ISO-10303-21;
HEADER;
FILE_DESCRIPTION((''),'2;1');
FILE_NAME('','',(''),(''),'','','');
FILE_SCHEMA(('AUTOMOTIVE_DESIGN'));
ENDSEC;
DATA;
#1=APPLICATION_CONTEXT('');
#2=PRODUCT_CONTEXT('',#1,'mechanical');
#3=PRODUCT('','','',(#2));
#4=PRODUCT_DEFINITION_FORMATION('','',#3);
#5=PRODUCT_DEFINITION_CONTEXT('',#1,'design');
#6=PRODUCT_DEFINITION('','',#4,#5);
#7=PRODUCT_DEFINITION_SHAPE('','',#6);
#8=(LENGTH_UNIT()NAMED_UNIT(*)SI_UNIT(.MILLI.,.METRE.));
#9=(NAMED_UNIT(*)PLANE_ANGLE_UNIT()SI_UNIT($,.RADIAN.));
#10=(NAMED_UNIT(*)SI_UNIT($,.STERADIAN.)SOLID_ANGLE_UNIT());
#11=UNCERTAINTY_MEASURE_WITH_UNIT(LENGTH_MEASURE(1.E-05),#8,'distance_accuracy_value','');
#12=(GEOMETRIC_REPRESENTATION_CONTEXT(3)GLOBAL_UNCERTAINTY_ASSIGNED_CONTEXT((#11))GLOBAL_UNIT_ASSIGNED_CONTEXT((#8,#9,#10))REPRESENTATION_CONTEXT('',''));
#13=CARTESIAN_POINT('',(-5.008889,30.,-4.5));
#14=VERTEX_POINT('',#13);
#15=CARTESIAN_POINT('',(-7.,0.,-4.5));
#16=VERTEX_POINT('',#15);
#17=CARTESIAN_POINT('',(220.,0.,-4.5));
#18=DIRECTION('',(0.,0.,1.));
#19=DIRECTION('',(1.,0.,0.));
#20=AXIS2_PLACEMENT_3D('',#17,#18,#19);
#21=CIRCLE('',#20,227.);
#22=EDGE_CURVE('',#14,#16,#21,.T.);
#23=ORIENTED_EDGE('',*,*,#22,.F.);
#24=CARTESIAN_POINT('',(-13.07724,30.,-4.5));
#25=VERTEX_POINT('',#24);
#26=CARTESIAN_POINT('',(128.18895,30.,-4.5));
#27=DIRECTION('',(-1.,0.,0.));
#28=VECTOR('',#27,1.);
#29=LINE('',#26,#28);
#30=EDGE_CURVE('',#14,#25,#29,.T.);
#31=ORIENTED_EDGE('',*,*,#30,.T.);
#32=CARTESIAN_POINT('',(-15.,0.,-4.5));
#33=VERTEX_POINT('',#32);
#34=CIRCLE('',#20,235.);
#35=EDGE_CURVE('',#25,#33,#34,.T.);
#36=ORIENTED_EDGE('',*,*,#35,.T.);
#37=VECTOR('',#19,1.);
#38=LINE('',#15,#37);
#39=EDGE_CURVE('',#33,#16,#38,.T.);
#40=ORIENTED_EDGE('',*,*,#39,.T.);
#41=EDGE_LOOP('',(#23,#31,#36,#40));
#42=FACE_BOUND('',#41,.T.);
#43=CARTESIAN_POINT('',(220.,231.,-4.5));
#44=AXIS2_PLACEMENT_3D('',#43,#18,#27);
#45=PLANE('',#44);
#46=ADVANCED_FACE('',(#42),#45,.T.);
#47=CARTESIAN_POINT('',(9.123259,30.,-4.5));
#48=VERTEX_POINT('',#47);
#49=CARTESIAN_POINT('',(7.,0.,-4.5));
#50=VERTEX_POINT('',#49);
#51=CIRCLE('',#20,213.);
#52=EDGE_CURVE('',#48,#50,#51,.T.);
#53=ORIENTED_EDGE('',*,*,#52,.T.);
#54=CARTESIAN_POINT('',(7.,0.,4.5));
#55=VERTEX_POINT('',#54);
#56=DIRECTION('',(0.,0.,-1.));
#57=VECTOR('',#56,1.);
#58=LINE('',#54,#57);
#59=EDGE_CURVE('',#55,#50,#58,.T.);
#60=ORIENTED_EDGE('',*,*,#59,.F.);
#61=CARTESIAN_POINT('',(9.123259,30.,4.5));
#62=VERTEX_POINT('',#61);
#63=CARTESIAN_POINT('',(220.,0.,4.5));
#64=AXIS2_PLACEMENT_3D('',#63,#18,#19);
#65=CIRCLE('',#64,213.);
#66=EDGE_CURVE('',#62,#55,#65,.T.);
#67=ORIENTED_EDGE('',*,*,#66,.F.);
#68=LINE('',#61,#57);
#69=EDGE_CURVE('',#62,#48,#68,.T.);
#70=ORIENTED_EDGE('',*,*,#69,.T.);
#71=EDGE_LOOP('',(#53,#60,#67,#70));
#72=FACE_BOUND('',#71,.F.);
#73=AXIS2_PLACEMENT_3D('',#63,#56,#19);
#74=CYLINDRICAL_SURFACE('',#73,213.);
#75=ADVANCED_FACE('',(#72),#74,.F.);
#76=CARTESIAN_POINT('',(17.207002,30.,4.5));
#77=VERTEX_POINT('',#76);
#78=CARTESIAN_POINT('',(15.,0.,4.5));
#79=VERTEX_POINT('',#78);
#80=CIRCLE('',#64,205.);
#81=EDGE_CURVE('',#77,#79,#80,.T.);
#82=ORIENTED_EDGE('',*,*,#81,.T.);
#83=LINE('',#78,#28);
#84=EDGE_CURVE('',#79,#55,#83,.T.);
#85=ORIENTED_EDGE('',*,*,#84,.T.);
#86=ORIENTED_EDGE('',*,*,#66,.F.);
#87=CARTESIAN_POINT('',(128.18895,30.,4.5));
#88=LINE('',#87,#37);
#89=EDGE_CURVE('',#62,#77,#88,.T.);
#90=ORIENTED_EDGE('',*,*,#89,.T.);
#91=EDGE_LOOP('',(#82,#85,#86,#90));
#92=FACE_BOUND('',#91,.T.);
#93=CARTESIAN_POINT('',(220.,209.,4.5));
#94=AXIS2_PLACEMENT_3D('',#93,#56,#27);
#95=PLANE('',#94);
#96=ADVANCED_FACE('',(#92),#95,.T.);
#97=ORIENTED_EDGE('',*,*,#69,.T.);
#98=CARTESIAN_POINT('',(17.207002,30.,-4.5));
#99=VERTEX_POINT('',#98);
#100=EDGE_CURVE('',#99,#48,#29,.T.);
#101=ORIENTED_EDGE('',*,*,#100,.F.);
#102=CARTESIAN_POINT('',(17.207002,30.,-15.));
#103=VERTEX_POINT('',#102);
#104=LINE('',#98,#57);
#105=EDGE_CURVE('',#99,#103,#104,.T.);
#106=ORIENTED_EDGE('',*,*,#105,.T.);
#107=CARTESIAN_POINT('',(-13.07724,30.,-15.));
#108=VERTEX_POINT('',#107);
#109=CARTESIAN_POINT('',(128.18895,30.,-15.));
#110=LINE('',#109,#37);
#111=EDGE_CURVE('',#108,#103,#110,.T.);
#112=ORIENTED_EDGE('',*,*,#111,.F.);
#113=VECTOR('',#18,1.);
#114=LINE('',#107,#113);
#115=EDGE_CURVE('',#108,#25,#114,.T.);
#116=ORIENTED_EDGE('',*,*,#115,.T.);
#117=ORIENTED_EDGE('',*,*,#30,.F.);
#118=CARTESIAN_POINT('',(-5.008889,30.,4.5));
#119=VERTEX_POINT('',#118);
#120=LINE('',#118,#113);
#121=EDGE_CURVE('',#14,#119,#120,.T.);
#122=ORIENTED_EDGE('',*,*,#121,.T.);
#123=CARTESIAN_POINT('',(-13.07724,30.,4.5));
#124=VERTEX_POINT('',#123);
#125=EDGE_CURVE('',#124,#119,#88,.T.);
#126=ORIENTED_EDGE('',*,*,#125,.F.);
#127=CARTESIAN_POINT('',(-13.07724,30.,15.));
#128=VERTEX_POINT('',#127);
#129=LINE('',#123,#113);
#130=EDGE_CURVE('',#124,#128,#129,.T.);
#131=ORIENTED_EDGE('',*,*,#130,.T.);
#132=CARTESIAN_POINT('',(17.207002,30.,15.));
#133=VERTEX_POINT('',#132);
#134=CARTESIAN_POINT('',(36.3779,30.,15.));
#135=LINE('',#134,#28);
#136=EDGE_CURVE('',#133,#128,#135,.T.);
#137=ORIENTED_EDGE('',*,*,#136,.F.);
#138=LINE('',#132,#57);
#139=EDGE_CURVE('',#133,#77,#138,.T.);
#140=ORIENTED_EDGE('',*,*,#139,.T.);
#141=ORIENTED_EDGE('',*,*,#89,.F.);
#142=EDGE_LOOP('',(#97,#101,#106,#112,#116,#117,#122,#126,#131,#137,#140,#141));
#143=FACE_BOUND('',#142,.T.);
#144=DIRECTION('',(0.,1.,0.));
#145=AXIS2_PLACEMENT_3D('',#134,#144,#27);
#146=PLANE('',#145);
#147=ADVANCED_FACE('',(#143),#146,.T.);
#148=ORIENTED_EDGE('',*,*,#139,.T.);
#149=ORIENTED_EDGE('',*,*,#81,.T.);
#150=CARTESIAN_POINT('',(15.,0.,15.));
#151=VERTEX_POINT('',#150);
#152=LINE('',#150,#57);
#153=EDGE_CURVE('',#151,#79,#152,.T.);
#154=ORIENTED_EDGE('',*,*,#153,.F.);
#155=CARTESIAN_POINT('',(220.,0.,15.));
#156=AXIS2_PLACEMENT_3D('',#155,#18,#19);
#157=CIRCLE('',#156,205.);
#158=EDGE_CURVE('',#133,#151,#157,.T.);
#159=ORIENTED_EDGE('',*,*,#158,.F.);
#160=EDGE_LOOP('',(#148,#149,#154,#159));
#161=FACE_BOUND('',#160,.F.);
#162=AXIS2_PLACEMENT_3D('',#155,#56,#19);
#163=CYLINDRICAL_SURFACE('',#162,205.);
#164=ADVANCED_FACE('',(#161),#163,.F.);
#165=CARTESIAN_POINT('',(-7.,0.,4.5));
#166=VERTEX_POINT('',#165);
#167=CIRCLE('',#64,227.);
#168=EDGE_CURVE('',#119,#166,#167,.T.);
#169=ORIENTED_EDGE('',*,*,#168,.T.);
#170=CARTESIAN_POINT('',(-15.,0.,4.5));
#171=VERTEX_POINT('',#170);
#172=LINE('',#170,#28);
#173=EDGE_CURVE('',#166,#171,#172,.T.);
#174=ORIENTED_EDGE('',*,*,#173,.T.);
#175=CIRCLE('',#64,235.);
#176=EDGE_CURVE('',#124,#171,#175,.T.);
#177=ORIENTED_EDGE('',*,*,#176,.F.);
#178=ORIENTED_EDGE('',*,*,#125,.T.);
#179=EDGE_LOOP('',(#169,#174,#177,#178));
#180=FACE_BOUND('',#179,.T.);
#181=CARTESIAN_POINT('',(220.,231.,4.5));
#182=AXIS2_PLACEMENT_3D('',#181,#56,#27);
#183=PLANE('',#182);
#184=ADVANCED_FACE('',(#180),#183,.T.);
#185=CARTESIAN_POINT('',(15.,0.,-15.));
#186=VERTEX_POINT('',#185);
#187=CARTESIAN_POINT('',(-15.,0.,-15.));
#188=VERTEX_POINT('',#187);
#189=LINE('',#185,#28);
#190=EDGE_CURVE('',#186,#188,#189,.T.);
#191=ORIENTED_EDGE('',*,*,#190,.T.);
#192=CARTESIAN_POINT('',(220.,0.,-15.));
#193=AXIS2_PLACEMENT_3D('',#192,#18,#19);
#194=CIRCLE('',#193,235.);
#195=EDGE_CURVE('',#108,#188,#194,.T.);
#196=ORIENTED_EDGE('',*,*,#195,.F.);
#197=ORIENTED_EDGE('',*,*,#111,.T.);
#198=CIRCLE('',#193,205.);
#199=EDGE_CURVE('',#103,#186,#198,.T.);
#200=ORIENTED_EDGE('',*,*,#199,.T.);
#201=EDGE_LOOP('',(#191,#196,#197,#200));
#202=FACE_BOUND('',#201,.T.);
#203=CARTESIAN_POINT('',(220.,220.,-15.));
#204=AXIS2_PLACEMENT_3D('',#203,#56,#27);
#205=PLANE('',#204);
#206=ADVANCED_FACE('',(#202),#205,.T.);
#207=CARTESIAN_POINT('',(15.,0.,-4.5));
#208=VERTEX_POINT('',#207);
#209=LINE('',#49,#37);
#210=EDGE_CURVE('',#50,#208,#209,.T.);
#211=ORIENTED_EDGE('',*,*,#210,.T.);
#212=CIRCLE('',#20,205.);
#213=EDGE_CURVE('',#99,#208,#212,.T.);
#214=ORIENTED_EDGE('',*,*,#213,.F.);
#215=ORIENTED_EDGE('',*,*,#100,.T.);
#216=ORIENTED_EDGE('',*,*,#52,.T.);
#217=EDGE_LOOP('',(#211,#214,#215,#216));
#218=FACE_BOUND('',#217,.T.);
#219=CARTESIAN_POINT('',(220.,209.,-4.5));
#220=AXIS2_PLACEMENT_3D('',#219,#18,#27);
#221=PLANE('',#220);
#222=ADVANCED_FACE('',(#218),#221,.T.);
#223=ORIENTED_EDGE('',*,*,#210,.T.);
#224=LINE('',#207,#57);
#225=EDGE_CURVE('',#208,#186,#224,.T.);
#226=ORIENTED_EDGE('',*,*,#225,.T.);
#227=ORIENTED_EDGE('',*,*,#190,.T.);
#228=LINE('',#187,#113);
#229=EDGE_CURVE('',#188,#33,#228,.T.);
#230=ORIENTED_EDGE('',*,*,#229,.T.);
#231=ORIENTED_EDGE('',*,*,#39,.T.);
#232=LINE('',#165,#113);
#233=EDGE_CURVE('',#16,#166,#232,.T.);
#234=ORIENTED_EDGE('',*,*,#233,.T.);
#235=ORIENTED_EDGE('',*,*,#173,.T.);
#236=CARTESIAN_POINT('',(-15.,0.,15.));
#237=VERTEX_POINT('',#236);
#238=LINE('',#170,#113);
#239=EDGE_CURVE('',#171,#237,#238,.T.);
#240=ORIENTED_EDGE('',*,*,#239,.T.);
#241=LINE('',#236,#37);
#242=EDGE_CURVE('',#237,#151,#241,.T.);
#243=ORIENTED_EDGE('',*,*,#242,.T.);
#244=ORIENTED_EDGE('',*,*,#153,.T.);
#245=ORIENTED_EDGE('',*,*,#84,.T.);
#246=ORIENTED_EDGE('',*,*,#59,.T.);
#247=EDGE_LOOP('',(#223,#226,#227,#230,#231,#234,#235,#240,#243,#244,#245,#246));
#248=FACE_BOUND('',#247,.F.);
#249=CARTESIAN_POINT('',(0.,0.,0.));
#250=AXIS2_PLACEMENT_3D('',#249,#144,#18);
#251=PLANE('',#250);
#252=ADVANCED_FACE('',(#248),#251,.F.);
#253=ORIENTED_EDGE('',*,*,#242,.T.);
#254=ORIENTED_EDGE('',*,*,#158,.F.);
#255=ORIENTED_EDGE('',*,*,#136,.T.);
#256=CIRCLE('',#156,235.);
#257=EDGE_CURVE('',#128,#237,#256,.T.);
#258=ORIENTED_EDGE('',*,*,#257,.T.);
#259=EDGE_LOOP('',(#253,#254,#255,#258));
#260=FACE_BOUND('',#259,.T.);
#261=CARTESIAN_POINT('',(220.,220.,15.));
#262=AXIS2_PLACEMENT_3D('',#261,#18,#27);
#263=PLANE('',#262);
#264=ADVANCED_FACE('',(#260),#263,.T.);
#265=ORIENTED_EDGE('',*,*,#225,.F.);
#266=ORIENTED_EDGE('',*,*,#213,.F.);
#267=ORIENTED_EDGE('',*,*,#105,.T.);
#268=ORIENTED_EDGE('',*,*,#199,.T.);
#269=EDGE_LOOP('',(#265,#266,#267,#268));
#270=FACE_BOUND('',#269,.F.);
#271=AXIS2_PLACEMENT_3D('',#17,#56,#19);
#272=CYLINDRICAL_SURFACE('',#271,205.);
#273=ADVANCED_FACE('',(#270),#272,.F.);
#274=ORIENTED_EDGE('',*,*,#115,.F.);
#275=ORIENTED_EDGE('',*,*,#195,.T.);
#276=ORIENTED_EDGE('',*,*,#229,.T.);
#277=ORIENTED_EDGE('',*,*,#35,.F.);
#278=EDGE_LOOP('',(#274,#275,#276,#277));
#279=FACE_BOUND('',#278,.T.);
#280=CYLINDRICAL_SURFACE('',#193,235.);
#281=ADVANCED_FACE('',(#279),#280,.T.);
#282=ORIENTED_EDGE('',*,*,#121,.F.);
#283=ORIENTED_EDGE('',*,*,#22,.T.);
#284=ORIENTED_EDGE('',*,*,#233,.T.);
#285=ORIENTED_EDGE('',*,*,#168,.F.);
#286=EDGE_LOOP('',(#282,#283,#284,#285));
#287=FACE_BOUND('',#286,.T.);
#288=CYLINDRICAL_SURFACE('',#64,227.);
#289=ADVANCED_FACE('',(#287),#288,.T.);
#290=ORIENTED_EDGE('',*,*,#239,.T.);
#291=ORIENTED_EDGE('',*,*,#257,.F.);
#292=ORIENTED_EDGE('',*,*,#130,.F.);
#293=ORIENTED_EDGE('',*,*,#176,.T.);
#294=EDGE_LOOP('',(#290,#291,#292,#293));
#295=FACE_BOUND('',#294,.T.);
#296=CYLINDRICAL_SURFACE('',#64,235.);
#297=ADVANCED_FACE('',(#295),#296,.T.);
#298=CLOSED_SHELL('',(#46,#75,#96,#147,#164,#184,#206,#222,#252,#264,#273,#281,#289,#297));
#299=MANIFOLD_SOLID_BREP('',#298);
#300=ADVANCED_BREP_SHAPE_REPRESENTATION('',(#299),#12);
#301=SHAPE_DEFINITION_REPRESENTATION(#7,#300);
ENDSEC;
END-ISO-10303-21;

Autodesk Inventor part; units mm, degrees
ref_plane "YZ Plane" through (0, 0, 0) normal (1, 0, 0) x (0, 1, 0)
ref_plane "XY Plane" through (0, 0, 0) normal (0, 0, 1) x (1, 0, 0)
sketch "Sketch1" plane through (0, 0, 0) normal (0, 0, 1) x (1, 0, 0)
  arc A0 (440, 0) -> (0, 0) centre (220, 0) ccw
  dimension "d1" = 440
  dimension "d17" = 220
sketch "Sketch2" plane through (0, 0, 0) normal (0, 1, 0) x (-1, 0, 0)
  line L0 (15, 15) -> (-15, 15)
  line L1 (-15, -15) -> (15, -15)
  line L2 (15, 4.5) -> (7, 4.5)
  line L3 (7, 4.5) -> (7, -4.5)
  line L4 (7, -4.5) -> (15, -4.5)
  line L5 (-15, 4.5) -> (-7, 4.5)
  line L6 (-7, 4.5) -> (-7, -4.5)
  line L7 (-7, -4.5) -> (-15, -4.5)
  line L8 (15, -15) -> (15, -4.5)
  line L9 (15, 4.5) -> (15, 15)
  line L10 (-15, 15) -> (-15, 4.5)
  line L11 (-15, -4.5) -> (-15, -15)
  point P0 (0, 0)
  dimension "d18" = 9
  dimension "d19" = 8
  dimension "d21" = 14
  dimension "d22" = 30
  dimension "d23" = 15
  dimension "d24" = 4.5
  dimension "d25" = 7
sweep "Sweep1" add profiles "Sketch2" path "Sketch1"
sketch "Sketch4" plane through (-15, 0, 15) normal (0, 0, 1) x (1, 0, 0)
  line L0 (470, 0) -> (440, 0) projected
  line L1 (470, 0) -> (51.3779, 0)
  line L2 (51.3779, 0) -> (51.3779, 30)
  line L3 (51.3779, 30) -> (0.5743, 30)
  line L4 (0.5743, 30) -> (0.5743, 269.0711)
  line L5 (0.5743, 269.0711) -> (470, 269.0711)
  line L6 (470, 269.0711) -> (470, 0)
  point P0 (15, 0)
  dimension "d34" = 469.4257
  dimension "d35" = 30
  dimension "d36" = 50.8036
  dimension "d37" = 269.0711
extrude "Extrusion2" cut sketch "Sketch4" against normal through all
properties part number "LightRail01"
